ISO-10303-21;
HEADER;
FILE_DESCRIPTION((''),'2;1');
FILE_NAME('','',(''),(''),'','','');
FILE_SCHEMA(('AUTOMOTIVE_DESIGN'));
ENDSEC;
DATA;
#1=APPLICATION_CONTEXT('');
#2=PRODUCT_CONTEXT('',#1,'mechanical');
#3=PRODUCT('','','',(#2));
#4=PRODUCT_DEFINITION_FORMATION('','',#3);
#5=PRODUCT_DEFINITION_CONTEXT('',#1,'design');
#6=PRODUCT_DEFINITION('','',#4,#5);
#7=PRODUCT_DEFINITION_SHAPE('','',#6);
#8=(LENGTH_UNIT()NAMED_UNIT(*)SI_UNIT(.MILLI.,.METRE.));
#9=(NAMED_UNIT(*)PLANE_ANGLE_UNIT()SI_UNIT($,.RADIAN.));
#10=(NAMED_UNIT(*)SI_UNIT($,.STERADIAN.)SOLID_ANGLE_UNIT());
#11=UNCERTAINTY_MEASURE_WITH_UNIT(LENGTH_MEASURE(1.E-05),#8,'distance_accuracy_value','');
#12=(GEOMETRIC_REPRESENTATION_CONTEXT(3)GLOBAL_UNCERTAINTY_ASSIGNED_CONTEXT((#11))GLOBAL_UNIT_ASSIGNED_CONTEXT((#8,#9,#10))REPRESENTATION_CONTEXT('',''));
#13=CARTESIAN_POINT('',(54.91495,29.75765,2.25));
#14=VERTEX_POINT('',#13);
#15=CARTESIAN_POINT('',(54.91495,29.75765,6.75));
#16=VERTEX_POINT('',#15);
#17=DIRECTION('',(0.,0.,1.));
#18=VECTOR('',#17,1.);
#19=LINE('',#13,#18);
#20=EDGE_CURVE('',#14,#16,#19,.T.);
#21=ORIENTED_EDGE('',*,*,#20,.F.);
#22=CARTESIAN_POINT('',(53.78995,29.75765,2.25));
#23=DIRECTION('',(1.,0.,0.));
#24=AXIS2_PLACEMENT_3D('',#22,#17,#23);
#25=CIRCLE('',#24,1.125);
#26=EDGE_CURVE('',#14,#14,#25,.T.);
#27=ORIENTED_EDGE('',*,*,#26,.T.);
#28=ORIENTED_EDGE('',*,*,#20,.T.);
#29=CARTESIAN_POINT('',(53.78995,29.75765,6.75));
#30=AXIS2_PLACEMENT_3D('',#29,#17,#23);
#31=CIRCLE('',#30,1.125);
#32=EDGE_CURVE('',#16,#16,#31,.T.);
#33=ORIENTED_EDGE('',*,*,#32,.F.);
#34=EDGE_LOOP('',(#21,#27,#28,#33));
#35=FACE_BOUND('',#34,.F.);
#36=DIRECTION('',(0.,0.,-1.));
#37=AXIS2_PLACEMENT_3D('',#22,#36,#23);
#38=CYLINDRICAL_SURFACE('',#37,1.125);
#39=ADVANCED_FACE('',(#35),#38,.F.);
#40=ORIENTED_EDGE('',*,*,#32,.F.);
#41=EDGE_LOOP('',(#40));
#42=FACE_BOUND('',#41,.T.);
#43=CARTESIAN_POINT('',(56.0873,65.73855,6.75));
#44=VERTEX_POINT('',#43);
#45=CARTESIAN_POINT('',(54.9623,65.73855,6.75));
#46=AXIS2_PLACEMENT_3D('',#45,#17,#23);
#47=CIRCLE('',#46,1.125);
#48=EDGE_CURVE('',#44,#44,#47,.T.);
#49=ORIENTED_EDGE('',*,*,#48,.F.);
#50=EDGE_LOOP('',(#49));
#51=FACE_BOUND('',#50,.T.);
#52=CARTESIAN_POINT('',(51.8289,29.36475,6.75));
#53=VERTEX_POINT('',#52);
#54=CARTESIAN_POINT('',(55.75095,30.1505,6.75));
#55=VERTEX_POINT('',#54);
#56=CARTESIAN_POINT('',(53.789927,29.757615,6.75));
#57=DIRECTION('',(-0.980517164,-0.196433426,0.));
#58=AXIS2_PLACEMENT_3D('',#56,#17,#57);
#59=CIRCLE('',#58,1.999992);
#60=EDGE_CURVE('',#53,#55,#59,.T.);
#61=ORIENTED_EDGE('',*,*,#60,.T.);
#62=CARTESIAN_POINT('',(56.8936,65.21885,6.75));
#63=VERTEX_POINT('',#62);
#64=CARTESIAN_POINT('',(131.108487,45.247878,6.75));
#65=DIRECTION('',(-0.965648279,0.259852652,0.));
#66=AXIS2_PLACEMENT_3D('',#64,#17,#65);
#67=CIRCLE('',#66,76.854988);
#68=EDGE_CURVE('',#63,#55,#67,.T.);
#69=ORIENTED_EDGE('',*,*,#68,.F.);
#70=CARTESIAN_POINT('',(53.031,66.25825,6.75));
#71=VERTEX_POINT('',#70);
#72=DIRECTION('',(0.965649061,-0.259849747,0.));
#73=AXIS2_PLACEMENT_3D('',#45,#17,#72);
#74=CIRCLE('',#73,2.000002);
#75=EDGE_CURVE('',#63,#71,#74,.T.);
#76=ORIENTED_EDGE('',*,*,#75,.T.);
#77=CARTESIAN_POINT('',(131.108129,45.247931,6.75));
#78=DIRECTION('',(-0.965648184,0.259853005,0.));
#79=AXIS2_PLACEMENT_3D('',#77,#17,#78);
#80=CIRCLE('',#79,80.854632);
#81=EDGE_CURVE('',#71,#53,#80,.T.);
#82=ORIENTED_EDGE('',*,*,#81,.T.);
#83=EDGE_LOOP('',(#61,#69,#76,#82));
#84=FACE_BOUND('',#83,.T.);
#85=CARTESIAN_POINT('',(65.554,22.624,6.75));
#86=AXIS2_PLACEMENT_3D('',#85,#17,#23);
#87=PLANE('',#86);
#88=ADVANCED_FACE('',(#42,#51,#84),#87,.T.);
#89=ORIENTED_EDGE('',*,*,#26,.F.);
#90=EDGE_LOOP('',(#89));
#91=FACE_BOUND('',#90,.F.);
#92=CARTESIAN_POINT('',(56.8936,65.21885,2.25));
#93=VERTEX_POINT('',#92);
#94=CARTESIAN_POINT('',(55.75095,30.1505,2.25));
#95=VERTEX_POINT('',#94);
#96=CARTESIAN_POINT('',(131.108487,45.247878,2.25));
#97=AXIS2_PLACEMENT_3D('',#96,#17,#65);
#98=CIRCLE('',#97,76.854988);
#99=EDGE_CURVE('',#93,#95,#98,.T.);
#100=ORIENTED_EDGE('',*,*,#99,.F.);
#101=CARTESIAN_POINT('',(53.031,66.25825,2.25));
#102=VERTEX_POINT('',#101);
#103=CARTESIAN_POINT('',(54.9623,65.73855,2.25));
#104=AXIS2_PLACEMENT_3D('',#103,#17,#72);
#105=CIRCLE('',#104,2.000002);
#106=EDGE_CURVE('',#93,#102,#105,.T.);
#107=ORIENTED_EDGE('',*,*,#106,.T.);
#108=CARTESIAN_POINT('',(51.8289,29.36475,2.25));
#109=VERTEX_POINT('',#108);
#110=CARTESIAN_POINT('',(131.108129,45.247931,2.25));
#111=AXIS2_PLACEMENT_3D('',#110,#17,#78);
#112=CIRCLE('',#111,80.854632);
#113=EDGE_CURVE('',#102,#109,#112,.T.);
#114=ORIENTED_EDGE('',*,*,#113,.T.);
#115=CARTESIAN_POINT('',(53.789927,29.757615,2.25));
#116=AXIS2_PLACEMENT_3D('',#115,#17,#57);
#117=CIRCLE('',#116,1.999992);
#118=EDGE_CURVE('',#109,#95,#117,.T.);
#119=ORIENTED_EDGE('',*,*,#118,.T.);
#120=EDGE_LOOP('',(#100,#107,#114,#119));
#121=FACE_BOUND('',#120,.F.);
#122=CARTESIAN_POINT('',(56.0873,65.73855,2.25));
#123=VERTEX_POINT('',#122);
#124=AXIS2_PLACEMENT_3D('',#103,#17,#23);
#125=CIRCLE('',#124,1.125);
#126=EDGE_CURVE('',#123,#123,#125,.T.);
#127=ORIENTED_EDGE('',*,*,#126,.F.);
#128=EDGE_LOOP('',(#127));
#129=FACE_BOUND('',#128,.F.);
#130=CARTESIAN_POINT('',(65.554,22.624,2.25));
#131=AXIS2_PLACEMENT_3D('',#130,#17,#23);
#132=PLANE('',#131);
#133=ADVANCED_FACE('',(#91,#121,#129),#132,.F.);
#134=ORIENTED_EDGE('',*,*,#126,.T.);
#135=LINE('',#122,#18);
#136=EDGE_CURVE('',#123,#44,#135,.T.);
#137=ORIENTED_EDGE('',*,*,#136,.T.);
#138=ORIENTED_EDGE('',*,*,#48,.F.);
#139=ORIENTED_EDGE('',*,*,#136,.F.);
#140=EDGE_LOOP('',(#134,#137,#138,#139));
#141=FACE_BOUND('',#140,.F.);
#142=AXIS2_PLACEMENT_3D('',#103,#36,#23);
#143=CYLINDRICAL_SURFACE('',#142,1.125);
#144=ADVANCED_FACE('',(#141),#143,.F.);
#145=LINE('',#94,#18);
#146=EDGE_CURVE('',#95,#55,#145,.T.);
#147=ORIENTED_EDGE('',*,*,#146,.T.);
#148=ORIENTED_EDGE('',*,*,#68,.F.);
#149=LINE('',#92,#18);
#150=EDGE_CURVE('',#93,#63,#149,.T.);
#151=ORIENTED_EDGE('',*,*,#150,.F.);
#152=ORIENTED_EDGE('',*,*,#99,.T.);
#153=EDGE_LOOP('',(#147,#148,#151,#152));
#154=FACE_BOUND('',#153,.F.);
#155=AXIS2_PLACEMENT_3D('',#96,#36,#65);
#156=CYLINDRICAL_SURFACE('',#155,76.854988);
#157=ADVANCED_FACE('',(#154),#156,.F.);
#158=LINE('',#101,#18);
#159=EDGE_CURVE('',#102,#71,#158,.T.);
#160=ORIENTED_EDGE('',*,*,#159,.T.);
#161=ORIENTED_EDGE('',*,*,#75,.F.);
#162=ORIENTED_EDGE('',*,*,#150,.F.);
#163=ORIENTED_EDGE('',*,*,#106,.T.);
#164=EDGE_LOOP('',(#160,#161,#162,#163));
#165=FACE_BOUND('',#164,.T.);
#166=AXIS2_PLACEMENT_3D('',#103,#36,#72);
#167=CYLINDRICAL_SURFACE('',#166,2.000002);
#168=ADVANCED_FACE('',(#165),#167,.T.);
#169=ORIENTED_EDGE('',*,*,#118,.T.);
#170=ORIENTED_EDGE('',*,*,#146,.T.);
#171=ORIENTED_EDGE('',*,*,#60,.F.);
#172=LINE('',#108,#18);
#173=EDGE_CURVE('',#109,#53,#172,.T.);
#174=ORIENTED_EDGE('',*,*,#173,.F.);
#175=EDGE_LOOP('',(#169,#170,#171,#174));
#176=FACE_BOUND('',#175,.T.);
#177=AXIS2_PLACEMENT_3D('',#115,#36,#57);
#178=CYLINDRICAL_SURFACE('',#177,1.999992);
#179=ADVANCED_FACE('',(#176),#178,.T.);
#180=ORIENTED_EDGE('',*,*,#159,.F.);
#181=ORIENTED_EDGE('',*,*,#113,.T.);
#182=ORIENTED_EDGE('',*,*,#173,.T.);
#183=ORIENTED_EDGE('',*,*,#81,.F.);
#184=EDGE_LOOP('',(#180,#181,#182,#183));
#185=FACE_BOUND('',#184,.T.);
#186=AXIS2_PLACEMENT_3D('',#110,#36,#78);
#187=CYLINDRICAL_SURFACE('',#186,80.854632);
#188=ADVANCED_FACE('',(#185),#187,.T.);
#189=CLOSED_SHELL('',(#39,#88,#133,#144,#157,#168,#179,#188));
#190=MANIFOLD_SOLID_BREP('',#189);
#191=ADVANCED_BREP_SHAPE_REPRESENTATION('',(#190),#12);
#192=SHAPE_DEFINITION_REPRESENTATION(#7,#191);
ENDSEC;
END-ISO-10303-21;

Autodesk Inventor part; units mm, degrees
ref_plane "YZ Plane" through (0, 0, 0) normal (1, 0, 0) x (0, 1, 0)
ref_plane "XZ Plane" through (0, 0, 0) normal (0, 1, 0) x (-1, 0, 0)
ref_plane "XY Plane" through (0, 0, 0) normal (0, 0, 1) x (1, 0, 0)
sketch "Sketch1" plane through (0, 0, 0) normal (0, 0, 1) x (1, 0, 0)
  circle A0 centre (-23.5281, 14.2673) radius 2.25 projected
  circle A1 centre (-21.1834, 86.2291) radius 2.25 projected
  arc A2 (-21.1834, 86.2291) -> (-23.5281, 14.2673) centre (131.108, 45.2479) ccw construction
  arc A3 (-25.046, 87.2685) -> (-27.4502, 13.4815) centre (131.108, 45.2479) ccw
  arc A4 (-17.3208, 85.1897) -> (-19.6061, 15.053) centre (131.108, 45.2479) ccw
  arc A5 (-17.3208, 85.1897) -> (-25.046, 87.2685) centre (-21.1834, 86.2291) ccw
  arc A6 (-27.4502, 13.4815) -> (-19.6061, 15.053) centre (-23.5281, 14.2673) ccw
  point P0 (0, 0)
  dimension "d0" = 8
extrude "Extrusion1" add sketch "Sketch1" along normal blind 9
scale "Scale1" factors (0.5, 0.5, 0.5) then translate (65.554, 22.624, 2.25) bodies 1
properties part number "MasiveBone2"
